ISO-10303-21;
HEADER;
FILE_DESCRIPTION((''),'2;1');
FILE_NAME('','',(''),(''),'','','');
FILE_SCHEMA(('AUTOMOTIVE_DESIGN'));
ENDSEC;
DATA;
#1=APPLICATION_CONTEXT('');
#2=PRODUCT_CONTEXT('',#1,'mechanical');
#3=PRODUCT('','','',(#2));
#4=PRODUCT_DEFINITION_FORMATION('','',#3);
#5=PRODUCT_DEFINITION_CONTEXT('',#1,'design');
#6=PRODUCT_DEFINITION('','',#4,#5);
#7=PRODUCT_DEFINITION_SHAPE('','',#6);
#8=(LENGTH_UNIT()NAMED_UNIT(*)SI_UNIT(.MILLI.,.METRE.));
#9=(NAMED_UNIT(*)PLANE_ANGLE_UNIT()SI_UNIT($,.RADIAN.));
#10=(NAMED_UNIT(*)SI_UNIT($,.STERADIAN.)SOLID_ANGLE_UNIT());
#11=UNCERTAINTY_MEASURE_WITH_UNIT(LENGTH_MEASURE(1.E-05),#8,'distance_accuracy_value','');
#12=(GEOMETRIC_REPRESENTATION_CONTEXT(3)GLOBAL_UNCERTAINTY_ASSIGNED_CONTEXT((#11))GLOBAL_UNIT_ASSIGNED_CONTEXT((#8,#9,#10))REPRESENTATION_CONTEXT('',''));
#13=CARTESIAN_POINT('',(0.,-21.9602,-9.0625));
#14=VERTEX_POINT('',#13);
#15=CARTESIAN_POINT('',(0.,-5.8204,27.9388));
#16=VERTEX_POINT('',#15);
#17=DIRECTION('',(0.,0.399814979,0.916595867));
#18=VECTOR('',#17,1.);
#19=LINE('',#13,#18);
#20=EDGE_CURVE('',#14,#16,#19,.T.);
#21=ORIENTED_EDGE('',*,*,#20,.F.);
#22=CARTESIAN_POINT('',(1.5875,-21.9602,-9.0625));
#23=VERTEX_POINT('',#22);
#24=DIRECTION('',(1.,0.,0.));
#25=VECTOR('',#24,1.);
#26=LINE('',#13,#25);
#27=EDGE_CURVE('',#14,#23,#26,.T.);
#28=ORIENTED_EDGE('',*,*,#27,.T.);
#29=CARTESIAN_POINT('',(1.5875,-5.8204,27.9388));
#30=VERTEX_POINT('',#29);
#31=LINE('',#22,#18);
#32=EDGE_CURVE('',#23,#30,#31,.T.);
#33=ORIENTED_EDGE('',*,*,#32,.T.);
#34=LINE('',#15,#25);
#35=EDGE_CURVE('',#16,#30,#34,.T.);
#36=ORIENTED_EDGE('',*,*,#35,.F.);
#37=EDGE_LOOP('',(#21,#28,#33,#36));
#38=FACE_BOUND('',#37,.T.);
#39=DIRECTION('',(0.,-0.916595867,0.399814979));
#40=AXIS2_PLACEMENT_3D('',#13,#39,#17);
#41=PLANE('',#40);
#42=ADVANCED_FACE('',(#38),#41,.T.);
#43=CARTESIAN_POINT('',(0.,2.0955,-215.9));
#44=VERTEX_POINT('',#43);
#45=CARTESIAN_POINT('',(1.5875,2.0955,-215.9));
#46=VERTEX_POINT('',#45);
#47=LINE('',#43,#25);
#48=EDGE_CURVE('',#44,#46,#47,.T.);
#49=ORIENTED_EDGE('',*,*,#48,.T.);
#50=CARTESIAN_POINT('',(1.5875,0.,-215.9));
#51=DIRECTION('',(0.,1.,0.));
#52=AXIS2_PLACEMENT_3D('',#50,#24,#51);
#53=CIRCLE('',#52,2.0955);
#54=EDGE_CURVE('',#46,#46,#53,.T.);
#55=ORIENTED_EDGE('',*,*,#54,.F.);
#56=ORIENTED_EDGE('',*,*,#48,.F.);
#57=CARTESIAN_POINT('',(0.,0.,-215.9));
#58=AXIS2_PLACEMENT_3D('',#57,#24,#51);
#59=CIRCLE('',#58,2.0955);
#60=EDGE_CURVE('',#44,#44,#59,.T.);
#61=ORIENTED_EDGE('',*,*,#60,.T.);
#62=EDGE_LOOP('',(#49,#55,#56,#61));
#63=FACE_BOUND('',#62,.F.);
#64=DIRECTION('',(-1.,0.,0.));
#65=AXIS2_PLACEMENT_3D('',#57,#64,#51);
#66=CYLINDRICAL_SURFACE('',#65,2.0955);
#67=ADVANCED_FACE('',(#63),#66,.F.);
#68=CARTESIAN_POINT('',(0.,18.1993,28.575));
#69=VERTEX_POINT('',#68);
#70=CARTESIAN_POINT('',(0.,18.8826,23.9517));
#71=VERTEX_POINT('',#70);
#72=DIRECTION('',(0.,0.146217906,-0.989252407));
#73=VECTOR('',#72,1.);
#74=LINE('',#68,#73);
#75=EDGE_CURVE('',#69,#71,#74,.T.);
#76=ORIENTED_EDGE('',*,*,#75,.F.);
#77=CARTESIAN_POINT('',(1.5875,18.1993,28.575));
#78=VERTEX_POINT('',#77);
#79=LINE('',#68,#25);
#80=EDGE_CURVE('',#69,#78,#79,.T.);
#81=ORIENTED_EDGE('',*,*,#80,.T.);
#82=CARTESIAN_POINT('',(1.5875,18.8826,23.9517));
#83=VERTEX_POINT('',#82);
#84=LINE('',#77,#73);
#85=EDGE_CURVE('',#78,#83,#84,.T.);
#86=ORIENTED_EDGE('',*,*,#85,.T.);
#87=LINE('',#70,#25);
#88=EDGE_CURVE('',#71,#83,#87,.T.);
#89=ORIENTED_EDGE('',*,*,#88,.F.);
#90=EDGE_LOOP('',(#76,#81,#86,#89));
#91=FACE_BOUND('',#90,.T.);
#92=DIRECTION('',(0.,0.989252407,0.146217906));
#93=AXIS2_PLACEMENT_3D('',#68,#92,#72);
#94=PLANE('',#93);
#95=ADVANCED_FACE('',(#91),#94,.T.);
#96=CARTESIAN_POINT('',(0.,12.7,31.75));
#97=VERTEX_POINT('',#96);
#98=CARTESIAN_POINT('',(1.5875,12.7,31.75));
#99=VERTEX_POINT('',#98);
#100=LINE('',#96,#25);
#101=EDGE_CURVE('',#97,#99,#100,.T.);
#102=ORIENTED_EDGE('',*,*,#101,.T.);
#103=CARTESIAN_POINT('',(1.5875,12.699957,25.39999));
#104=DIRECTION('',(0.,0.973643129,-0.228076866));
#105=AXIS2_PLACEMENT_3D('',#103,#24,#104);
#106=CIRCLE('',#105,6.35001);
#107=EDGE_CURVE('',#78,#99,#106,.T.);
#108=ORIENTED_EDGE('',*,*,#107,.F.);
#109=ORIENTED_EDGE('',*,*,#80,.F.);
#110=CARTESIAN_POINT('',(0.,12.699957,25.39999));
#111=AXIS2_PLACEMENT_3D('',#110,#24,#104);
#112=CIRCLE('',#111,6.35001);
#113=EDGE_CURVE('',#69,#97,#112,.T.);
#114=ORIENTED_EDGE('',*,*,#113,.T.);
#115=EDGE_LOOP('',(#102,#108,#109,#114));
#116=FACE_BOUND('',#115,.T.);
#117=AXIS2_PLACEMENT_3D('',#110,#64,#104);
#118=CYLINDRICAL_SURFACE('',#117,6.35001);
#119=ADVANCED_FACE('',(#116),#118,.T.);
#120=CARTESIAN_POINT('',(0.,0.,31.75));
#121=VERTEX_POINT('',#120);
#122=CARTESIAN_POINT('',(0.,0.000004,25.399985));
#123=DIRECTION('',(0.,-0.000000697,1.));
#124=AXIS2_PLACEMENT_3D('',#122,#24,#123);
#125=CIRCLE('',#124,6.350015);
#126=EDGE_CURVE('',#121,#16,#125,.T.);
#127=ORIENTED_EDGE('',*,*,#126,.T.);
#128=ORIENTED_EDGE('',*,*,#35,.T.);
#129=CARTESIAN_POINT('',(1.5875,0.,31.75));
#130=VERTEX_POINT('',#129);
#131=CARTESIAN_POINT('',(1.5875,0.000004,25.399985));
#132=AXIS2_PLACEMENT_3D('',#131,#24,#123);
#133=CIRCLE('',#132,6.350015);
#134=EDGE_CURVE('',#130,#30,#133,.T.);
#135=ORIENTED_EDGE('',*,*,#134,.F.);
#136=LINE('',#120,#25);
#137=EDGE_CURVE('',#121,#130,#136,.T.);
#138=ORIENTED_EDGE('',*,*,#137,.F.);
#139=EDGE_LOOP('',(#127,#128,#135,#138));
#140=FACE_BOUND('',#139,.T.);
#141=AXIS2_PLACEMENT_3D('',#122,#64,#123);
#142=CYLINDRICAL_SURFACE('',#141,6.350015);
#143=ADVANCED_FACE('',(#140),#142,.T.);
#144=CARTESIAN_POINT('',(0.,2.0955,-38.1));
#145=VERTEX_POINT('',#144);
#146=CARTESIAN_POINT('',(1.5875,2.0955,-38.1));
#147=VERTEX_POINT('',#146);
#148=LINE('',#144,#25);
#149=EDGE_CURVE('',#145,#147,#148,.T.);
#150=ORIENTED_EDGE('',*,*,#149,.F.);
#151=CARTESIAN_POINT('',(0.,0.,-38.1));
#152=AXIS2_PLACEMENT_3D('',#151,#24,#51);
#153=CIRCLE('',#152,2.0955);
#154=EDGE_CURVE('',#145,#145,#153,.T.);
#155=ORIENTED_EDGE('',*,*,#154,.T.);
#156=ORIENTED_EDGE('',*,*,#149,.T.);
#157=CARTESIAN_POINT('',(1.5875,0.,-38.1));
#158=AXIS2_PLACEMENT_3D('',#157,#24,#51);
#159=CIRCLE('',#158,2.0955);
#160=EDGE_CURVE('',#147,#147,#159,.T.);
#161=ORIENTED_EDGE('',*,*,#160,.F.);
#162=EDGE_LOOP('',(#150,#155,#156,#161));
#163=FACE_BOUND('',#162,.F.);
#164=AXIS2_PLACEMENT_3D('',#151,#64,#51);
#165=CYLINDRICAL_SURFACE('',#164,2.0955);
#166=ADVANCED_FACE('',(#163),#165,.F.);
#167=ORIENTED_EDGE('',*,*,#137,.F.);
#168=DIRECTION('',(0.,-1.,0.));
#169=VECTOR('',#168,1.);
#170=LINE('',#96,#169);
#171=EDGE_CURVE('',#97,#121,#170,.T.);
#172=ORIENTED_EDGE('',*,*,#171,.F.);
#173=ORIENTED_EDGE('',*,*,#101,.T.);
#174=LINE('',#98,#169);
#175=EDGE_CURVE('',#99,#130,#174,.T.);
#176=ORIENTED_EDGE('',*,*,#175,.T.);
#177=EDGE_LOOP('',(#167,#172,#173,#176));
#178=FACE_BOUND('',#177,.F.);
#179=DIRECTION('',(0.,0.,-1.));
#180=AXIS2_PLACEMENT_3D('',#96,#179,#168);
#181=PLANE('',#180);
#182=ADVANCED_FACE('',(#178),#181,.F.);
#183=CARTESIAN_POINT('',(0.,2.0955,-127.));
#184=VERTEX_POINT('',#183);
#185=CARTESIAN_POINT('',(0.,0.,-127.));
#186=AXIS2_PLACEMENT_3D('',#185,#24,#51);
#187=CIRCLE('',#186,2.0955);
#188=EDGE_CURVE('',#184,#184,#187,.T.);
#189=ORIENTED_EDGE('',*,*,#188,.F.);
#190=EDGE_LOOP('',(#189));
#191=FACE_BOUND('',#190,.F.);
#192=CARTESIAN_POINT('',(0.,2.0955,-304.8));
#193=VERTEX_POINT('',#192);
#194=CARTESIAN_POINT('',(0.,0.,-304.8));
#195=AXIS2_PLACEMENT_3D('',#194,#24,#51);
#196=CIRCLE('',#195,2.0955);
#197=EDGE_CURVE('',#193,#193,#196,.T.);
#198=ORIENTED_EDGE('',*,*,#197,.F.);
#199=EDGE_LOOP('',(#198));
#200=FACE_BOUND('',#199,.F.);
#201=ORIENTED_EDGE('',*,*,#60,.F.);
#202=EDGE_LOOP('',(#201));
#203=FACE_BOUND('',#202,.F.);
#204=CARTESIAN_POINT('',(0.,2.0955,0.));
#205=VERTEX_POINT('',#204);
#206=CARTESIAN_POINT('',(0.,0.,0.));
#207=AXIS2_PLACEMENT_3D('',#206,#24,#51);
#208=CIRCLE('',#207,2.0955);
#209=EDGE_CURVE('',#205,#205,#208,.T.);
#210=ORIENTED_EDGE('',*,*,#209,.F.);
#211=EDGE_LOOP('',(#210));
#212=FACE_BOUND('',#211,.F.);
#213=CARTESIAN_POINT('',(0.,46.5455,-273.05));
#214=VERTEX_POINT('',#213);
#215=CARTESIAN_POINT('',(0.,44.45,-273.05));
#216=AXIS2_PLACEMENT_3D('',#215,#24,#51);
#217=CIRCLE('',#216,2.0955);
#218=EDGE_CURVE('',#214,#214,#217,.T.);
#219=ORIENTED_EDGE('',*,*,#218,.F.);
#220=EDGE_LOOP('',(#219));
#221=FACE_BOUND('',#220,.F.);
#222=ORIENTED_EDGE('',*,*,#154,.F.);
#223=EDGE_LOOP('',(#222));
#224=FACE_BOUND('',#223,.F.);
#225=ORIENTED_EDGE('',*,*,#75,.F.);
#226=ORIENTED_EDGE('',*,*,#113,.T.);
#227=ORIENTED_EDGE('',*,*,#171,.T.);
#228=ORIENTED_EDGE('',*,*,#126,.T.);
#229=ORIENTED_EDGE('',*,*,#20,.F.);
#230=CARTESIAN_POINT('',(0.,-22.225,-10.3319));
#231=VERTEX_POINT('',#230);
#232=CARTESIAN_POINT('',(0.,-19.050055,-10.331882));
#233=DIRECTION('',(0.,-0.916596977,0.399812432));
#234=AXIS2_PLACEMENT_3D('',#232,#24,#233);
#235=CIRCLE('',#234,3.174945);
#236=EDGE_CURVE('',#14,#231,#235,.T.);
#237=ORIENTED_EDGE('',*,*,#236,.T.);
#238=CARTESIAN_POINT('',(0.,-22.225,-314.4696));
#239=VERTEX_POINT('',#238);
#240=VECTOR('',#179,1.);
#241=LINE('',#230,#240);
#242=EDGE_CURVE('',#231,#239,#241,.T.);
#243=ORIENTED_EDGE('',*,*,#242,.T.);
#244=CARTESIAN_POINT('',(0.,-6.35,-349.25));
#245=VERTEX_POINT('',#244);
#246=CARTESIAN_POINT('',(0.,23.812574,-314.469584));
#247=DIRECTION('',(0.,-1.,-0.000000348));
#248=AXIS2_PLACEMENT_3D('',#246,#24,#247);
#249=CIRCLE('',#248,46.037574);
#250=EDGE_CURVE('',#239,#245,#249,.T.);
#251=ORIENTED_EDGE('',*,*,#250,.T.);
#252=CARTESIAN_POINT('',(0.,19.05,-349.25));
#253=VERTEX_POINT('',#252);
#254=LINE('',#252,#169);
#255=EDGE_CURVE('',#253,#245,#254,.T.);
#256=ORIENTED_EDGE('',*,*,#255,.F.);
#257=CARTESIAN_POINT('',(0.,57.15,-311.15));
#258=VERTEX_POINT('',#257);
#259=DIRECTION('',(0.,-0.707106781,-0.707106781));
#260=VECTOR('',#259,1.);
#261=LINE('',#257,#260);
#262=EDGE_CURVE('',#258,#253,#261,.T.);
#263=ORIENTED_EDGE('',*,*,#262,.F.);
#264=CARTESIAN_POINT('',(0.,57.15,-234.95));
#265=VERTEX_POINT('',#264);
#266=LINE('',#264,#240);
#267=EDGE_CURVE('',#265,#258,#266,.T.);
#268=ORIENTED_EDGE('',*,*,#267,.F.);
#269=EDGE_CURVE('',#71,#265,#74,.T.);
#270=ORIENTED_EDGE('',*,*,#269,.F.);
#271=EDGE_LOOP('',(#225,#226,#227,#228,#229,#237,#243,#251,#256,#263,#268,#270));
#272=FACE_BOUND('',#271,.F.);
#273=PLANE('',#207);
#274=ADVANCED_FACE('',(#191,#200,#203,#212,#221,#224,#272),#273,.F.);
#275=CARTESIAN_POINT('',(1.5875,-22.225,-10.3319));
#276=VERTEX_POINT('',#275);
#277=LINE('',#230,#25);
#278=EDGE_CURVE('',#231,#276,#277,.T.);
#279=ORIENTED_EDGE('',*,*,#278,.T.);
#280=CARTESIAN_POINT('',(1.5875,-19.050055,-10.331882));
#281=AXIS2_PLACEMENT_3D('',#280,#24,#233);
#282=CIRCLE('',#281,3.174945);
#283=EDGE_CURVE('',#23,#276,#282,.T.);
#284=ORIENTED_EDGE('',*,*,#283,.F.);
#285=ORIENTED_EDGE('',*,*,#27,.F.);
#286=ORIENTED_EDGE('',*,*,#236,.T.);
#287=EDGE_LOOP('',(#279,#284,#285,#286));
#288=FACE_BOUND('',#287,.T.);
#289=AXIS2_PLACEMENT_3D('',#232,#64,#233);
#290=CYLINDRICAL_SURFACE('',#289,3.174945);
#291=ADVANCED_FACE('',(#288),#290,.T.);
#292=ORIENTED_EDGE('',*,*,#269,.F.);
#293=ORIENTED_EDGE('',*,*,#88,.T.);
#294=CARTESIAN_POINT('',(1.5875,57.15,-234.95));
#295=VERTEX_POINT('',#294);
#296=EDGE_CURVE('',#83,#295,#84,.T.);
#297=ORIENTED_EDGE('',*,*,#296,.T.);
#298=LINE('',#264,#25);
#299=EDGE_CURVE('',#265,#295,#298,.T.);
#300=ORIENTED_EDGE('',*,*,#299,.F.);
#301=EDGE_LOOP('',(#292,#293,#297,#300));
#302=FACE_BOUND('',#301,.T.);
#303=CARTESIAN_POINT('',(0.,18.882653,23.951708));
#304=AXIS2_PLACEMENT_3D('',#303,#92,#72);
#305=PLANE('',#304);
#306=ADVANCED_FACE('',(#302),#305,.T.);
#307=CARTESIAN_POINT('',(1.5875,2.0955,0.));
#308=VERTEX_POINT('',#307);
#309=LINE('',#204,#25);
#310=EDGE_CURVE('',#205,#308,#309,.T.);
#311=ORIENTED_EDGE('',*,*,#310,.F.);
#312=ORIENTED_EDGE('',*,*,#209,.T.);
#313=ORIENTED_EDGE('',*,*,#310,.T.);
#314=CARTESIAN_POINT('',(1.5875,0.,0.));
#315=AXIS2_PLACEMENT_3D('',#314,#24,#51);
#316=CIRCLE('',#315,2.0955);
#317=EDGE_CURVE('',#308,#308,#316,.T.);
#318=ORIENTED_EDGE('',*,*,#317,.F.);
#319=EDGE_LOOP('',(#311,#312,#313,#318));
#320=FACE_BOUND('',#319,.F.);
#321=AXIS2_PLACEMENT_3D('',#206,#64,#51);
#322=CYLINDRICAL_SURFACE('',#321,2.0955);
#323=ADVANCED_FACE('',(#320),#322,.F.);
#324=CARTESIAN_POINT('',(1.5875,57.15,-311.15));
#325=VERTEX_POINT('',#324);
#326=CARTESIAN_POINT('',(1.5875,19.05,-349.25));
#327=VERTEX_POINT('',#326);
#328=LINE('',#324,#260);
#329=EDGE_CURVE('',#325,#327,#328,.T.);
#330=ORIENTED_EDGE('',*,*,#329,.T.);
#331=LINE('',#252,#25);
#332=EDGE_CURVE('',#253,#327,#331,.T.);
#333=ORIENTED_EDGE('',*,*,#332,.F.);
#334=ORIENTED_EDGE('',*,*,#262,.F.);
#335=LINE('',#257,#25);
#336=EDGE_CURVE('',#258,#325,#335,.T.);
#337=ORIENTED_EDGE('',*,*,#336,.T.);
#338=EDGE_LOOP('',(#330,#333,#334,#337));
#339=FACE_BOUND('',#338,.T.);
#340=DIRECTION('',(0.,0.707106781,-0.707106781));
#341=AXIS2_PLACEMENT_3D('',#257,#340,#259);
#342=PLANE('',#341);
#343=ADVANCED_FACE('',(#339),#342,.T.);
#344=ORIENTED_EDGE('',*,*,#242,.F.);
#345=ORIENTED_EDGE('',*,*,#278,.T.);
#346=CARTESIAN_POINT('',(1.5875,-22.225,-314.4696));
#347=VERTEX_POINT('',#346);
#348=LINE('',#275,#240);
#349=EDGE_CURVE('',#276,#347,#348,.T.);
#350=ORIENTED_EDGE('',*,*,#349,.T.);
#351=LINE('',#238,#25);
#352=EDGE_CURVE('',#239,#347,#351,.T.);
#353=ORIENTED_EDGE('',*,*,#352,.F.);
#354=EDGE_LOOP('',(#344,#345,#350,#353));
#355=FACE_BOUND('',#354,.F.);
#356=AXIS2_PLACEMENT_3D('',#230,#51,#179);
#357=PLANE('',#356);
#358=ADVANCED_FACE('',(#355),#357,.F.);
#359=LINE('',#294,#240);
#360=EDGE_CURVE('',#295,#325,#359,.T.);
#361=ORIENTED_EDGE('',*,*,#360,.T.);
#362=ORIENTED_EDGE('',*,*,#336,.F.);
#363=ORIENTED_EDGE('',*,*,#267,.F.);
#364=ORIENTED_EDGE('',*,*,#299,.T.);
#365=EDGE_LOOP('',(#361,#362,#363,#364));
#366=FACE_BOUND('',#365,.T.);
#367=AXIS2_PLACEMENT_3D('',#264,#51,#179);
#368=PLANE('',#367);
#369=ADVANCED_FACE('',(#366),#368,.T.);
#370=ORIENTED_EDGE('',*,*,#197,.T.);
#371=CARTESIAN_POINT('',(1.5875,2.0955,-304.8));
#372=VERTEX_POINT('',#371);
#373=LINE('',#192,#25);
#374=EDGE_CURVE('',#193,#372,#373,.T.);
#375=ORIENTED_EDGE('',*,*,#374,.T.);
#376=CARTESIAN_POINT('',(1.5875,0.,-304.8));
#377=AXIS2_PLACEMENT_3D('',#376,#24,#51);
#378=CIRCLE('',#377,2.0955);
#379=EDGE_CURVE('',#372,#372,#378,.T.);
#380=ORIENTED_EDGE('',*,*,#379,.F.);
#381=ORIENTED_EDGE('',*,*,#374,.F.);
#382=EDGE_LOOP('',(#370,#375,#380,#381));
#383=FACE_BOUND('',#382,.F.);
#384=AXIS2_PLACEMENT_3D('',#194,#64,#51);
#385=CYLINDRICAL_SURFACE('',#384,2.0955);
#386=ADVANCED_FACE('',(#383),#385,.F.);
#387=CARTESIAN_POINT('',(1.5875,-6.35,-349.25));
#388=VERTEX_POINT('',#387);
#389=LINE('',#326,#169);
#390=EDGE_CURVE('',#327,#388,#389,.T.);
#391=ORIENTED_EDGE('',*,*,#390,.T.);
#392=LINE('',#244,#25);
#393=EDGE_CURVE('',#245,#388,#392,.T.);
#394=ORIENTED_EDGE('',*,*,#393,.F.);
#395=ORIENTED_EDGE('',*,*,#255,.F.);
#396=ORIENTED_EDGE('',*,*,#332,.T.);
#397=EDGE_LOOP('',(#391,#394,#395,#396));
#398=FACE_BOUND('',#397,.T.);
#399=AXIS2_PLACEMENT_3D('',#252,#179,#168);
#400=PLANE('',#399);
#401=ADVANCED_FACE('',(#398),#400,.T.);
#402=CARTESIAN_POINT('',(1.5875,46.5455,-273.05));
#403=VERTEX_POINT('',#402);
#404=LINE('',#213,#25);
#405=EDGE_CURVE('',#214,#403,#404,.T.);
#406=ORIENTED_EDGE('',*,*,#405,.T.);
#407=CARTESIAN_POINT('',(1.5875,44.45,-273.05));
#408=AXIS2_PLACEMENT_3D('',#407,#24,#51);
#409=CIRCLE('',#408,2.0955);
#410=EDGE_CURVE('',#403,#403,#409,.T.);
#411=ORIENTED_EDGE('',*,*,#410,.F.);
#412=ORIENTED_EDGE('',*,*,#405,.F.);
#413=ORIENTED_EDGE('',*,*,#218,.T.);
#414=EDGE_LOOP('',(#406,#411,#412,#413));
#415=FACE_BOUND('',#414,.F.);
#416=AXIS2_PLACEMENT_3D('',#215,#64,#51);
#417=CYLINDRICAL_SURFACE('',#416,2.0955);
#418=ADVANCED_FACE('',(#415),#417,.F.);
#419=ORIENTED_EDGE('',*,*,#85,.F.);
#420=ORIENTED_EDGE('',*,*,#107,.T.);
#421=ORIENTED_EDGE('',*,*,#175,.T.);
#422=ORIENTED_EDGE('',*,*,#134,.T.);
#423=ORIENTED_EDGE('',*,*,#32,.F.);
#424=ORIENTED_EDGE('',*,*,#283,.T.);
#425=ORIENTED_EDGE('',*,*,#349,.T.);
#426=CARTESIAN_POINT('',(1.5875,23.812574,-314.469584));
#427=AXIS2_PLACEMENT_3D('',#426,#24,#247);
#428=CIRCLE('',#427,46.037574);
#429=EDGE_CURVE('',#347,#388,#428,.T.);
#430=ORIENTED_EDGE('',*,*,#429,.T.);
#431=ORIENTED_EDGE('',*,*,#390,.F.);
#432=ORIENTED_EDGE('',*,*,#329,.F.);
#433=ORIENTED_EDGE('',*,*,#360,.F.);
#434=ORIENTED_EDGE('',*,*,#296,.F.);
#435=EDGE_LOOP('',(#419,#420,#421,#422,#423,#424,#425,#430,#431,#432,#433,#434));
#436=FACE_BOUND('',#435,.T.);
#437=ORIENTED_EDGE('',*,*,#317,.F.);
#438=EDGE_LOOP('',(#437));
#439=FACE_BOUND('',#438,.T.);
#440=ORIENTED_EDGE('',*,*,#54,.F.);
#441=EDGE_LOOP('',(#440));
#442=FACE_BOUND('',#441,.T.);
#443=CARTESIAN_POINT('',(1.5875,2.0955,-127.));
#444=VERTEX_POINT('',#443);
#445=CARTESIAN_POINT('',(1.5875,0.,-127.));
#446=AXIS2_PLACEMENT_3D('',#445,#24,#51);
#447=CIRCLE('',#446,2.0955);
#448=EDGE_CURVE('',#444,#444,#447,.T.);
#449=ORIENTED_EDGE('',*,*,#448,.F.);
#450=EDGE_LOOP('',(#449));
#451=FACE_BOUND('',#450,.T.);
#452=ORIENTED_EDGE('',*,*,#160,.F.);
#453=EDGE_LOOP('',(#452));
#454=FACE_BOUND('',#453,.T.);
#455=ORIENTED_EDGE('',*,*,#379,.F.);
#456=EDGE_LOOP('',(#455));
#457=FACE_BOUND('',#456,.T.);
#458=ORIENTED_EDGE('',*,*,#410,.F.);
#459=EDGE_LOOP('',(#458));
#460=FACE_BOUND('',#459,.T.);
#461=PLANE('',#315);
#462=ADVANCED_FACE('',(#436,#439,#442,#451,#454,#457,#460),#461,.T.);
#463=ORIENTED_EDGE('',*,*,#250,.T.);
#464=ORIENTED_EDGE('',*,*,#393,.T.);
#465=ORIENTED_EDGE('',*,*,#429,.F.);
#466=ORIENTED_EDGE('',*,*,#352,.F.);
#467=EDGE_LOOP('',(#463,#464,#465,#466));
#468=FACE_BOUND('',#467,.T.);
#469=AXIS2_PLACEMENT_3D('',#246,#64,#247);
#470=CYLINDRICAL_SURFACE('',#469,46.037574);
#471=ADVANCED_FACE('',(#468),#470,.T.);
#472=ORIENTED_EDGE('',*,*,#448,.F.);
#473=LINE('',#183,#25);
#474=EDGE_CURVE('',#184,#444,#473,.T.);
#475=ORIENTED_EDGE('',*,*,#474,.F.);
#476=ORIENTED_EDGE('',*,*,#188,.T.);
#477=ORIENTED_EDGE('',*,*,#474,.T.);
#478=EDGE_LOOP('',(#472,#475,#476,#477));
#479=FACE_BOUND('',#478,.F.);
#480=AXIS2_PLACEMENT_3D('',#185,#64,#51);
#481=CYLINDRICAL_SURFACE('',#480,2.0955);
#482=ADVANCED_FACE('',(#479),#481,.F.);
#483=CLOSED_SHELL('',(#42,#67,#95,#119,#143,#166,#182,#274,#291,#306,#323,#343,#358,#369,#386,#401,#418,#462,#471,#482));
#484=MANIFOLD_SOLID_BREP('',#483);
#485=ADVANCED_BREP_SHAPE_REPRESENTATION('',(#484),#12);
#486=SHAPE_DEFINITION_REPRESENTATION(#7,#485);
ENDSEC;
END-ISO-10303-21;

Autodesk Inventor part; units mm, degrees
ref_plane "YZ Plane" through (0, 0, 0) normal (1, 0, 0) x (0, 1, 0)
ref_plane "XZ Plane" through (0, 0, 0) normal (0, 1, 0) x (-1, 0, 0)
ref_plane "XY Plane" through (0, 0, 0) normal (0, 0, 1) x (1, 0, 0)
sketch "main" plane through (0, 0, 0) normal (0, 0, 1) x (1, 0, 0)
  circle A0 centre (-12.3674, 169.8166) radius 2.0955
  circle A1 centre (-12.3674, 131.7166) radius 2.0955
  circle A2 centre (-12.3674, 42.8166) radius 2.0955
  circle A3 centre (-12.3674, -46.0834) radius 2.0955
  circle A4 centre (-12.3674, -134.9834) radius 2.0955
  arc A5 (6.5152, 193.7683) -> (0.3326, 201.5666) centre (0.3326, 195.2166) ccw
  line L0 (-34.5924, 159.4847) -> (-34.5924, -144.653)
  line L1 (5.8319, 198.3916) -> (44.7826, -65.1334)
  arc A6 (-34.3276, 160.7541) -> (-34.5924, 159.4847) centre (-31.4174, 159.4847) ccw
  line L2 (-34.3276, 160.7541) -> (-18.1878, 197.7554)
  line L3 (0.3326, 201.5666) -> (-12.3674, 201.5666)
  arc A7 (-12.3674, 201.5666) -> (-18.1878, 197.7554) centre (-12.3674, 195.2166) ccw
  line L4 (44.7826, -65.1334) -> (44.7826, -141.3334)
  arc A8 (-34.5924, -144.653) -> (-18.7174, -179.4334) centre (11.4451, -144.653) ccw
  line L5 (6.6826, -179.4334) -> (-18.7174, -179.4334)
  line L6 (44.7826, -141.3334) -> (6.6826, -179.4334)
  circle A9 centre (32.0826, -103.2334) radius 2.0955
  point P0 (-1.329, 35.5886)
  point P1 (-34.5924, 160.147)
  point P2 (38.4326, -84.1834)
  dimension "d0" = 12.7
  dimension "d1" = 304.8
  dimension "d2" = 15.875
  dimension "d3" = 25.4
  dimension "d4" = 3.175
  dimension "d8" = 4.191
  dimension "d9" = 4.191
  dimension "d10" = 4.191
  dimension "d11" = 4.191
  dimension "d12" = 4.191
  dimension "d13" = 4.191
sketch "Sketch1" plane through (0, 0, 0) normal (1, 0, 0) x (0, 1, 0)
  circle A0 centre (0, 0) radius 2.0955
  circle A1 centre (0, -38.1) radius 2.0955
  circle A2 centre (0, -127) radius 2.0955
  circle A3 centre (0, -215.9) radius 2.0955
  circle A4 centre (0, -304.8) radius 2.0955
  arc A5 (18.8826, 23.9517) -> (12.7, 31.75) centre (12.7, 25.4) ccw
  line L0 (-22.225, -10.3319) -> (-22.225, -314.4696)
  line L1 (18.1993, 28.575) -> (57.15, -234.95)
  arc A6 (-21.9602, -9.0625) -> (-22.225, -10.3319) centre (-19.05, -10.3319) ccw
  line L2 (-21.9602, -9.0625) -> (-5.8204, 27.9388)
  line L3 (12.7, 31.75) -> (0, 31.75)
  arc A7 (0, 31.75) -> (-5.8204, 27.9388) centre (0, 25.4) ccw
  line L4 (57.15, -234.95) -> (57.15, -311.15)
  arc A8 (-22.225, -314.4696) -> (-6.35, -349.25) centre (23.8125, -314.4696) ccw
  line L5 (19.05, -349.25) -> (-6.35, -349.25)
  line L6 (57.15, -311.15) -> (19.05, -349.25)
  circle A9 centre (44.45, -273.05) radius 2.0955
extrude "Extrusion1" add sketch "Sketch1" along normal blind 1.5875 contours L1 L4 L6 L5 A8 L0 A6 L2 A7 L3 A5
equation "\"BendRadius\" = Thickness"
equation "\"BendReliefWidth\" = Thickness"
equation "\"BendReliefDepth\" = 0.5 * Thickness"
equation "\"CornerReliefSize\" = 4 * Thickness"
equation "\"MinimumRemnant\" = 2 * Thickness"
equation "\"TransitionRadius\" = BendRadius"
equation "\"JacobiRadiusSize\" = BendRadius"
equation "\"GapSize\" = Thickness"
equation "\"Thickness\" = 1.5875"
properties part number "Skirt" material "Acetal Resin, White"
